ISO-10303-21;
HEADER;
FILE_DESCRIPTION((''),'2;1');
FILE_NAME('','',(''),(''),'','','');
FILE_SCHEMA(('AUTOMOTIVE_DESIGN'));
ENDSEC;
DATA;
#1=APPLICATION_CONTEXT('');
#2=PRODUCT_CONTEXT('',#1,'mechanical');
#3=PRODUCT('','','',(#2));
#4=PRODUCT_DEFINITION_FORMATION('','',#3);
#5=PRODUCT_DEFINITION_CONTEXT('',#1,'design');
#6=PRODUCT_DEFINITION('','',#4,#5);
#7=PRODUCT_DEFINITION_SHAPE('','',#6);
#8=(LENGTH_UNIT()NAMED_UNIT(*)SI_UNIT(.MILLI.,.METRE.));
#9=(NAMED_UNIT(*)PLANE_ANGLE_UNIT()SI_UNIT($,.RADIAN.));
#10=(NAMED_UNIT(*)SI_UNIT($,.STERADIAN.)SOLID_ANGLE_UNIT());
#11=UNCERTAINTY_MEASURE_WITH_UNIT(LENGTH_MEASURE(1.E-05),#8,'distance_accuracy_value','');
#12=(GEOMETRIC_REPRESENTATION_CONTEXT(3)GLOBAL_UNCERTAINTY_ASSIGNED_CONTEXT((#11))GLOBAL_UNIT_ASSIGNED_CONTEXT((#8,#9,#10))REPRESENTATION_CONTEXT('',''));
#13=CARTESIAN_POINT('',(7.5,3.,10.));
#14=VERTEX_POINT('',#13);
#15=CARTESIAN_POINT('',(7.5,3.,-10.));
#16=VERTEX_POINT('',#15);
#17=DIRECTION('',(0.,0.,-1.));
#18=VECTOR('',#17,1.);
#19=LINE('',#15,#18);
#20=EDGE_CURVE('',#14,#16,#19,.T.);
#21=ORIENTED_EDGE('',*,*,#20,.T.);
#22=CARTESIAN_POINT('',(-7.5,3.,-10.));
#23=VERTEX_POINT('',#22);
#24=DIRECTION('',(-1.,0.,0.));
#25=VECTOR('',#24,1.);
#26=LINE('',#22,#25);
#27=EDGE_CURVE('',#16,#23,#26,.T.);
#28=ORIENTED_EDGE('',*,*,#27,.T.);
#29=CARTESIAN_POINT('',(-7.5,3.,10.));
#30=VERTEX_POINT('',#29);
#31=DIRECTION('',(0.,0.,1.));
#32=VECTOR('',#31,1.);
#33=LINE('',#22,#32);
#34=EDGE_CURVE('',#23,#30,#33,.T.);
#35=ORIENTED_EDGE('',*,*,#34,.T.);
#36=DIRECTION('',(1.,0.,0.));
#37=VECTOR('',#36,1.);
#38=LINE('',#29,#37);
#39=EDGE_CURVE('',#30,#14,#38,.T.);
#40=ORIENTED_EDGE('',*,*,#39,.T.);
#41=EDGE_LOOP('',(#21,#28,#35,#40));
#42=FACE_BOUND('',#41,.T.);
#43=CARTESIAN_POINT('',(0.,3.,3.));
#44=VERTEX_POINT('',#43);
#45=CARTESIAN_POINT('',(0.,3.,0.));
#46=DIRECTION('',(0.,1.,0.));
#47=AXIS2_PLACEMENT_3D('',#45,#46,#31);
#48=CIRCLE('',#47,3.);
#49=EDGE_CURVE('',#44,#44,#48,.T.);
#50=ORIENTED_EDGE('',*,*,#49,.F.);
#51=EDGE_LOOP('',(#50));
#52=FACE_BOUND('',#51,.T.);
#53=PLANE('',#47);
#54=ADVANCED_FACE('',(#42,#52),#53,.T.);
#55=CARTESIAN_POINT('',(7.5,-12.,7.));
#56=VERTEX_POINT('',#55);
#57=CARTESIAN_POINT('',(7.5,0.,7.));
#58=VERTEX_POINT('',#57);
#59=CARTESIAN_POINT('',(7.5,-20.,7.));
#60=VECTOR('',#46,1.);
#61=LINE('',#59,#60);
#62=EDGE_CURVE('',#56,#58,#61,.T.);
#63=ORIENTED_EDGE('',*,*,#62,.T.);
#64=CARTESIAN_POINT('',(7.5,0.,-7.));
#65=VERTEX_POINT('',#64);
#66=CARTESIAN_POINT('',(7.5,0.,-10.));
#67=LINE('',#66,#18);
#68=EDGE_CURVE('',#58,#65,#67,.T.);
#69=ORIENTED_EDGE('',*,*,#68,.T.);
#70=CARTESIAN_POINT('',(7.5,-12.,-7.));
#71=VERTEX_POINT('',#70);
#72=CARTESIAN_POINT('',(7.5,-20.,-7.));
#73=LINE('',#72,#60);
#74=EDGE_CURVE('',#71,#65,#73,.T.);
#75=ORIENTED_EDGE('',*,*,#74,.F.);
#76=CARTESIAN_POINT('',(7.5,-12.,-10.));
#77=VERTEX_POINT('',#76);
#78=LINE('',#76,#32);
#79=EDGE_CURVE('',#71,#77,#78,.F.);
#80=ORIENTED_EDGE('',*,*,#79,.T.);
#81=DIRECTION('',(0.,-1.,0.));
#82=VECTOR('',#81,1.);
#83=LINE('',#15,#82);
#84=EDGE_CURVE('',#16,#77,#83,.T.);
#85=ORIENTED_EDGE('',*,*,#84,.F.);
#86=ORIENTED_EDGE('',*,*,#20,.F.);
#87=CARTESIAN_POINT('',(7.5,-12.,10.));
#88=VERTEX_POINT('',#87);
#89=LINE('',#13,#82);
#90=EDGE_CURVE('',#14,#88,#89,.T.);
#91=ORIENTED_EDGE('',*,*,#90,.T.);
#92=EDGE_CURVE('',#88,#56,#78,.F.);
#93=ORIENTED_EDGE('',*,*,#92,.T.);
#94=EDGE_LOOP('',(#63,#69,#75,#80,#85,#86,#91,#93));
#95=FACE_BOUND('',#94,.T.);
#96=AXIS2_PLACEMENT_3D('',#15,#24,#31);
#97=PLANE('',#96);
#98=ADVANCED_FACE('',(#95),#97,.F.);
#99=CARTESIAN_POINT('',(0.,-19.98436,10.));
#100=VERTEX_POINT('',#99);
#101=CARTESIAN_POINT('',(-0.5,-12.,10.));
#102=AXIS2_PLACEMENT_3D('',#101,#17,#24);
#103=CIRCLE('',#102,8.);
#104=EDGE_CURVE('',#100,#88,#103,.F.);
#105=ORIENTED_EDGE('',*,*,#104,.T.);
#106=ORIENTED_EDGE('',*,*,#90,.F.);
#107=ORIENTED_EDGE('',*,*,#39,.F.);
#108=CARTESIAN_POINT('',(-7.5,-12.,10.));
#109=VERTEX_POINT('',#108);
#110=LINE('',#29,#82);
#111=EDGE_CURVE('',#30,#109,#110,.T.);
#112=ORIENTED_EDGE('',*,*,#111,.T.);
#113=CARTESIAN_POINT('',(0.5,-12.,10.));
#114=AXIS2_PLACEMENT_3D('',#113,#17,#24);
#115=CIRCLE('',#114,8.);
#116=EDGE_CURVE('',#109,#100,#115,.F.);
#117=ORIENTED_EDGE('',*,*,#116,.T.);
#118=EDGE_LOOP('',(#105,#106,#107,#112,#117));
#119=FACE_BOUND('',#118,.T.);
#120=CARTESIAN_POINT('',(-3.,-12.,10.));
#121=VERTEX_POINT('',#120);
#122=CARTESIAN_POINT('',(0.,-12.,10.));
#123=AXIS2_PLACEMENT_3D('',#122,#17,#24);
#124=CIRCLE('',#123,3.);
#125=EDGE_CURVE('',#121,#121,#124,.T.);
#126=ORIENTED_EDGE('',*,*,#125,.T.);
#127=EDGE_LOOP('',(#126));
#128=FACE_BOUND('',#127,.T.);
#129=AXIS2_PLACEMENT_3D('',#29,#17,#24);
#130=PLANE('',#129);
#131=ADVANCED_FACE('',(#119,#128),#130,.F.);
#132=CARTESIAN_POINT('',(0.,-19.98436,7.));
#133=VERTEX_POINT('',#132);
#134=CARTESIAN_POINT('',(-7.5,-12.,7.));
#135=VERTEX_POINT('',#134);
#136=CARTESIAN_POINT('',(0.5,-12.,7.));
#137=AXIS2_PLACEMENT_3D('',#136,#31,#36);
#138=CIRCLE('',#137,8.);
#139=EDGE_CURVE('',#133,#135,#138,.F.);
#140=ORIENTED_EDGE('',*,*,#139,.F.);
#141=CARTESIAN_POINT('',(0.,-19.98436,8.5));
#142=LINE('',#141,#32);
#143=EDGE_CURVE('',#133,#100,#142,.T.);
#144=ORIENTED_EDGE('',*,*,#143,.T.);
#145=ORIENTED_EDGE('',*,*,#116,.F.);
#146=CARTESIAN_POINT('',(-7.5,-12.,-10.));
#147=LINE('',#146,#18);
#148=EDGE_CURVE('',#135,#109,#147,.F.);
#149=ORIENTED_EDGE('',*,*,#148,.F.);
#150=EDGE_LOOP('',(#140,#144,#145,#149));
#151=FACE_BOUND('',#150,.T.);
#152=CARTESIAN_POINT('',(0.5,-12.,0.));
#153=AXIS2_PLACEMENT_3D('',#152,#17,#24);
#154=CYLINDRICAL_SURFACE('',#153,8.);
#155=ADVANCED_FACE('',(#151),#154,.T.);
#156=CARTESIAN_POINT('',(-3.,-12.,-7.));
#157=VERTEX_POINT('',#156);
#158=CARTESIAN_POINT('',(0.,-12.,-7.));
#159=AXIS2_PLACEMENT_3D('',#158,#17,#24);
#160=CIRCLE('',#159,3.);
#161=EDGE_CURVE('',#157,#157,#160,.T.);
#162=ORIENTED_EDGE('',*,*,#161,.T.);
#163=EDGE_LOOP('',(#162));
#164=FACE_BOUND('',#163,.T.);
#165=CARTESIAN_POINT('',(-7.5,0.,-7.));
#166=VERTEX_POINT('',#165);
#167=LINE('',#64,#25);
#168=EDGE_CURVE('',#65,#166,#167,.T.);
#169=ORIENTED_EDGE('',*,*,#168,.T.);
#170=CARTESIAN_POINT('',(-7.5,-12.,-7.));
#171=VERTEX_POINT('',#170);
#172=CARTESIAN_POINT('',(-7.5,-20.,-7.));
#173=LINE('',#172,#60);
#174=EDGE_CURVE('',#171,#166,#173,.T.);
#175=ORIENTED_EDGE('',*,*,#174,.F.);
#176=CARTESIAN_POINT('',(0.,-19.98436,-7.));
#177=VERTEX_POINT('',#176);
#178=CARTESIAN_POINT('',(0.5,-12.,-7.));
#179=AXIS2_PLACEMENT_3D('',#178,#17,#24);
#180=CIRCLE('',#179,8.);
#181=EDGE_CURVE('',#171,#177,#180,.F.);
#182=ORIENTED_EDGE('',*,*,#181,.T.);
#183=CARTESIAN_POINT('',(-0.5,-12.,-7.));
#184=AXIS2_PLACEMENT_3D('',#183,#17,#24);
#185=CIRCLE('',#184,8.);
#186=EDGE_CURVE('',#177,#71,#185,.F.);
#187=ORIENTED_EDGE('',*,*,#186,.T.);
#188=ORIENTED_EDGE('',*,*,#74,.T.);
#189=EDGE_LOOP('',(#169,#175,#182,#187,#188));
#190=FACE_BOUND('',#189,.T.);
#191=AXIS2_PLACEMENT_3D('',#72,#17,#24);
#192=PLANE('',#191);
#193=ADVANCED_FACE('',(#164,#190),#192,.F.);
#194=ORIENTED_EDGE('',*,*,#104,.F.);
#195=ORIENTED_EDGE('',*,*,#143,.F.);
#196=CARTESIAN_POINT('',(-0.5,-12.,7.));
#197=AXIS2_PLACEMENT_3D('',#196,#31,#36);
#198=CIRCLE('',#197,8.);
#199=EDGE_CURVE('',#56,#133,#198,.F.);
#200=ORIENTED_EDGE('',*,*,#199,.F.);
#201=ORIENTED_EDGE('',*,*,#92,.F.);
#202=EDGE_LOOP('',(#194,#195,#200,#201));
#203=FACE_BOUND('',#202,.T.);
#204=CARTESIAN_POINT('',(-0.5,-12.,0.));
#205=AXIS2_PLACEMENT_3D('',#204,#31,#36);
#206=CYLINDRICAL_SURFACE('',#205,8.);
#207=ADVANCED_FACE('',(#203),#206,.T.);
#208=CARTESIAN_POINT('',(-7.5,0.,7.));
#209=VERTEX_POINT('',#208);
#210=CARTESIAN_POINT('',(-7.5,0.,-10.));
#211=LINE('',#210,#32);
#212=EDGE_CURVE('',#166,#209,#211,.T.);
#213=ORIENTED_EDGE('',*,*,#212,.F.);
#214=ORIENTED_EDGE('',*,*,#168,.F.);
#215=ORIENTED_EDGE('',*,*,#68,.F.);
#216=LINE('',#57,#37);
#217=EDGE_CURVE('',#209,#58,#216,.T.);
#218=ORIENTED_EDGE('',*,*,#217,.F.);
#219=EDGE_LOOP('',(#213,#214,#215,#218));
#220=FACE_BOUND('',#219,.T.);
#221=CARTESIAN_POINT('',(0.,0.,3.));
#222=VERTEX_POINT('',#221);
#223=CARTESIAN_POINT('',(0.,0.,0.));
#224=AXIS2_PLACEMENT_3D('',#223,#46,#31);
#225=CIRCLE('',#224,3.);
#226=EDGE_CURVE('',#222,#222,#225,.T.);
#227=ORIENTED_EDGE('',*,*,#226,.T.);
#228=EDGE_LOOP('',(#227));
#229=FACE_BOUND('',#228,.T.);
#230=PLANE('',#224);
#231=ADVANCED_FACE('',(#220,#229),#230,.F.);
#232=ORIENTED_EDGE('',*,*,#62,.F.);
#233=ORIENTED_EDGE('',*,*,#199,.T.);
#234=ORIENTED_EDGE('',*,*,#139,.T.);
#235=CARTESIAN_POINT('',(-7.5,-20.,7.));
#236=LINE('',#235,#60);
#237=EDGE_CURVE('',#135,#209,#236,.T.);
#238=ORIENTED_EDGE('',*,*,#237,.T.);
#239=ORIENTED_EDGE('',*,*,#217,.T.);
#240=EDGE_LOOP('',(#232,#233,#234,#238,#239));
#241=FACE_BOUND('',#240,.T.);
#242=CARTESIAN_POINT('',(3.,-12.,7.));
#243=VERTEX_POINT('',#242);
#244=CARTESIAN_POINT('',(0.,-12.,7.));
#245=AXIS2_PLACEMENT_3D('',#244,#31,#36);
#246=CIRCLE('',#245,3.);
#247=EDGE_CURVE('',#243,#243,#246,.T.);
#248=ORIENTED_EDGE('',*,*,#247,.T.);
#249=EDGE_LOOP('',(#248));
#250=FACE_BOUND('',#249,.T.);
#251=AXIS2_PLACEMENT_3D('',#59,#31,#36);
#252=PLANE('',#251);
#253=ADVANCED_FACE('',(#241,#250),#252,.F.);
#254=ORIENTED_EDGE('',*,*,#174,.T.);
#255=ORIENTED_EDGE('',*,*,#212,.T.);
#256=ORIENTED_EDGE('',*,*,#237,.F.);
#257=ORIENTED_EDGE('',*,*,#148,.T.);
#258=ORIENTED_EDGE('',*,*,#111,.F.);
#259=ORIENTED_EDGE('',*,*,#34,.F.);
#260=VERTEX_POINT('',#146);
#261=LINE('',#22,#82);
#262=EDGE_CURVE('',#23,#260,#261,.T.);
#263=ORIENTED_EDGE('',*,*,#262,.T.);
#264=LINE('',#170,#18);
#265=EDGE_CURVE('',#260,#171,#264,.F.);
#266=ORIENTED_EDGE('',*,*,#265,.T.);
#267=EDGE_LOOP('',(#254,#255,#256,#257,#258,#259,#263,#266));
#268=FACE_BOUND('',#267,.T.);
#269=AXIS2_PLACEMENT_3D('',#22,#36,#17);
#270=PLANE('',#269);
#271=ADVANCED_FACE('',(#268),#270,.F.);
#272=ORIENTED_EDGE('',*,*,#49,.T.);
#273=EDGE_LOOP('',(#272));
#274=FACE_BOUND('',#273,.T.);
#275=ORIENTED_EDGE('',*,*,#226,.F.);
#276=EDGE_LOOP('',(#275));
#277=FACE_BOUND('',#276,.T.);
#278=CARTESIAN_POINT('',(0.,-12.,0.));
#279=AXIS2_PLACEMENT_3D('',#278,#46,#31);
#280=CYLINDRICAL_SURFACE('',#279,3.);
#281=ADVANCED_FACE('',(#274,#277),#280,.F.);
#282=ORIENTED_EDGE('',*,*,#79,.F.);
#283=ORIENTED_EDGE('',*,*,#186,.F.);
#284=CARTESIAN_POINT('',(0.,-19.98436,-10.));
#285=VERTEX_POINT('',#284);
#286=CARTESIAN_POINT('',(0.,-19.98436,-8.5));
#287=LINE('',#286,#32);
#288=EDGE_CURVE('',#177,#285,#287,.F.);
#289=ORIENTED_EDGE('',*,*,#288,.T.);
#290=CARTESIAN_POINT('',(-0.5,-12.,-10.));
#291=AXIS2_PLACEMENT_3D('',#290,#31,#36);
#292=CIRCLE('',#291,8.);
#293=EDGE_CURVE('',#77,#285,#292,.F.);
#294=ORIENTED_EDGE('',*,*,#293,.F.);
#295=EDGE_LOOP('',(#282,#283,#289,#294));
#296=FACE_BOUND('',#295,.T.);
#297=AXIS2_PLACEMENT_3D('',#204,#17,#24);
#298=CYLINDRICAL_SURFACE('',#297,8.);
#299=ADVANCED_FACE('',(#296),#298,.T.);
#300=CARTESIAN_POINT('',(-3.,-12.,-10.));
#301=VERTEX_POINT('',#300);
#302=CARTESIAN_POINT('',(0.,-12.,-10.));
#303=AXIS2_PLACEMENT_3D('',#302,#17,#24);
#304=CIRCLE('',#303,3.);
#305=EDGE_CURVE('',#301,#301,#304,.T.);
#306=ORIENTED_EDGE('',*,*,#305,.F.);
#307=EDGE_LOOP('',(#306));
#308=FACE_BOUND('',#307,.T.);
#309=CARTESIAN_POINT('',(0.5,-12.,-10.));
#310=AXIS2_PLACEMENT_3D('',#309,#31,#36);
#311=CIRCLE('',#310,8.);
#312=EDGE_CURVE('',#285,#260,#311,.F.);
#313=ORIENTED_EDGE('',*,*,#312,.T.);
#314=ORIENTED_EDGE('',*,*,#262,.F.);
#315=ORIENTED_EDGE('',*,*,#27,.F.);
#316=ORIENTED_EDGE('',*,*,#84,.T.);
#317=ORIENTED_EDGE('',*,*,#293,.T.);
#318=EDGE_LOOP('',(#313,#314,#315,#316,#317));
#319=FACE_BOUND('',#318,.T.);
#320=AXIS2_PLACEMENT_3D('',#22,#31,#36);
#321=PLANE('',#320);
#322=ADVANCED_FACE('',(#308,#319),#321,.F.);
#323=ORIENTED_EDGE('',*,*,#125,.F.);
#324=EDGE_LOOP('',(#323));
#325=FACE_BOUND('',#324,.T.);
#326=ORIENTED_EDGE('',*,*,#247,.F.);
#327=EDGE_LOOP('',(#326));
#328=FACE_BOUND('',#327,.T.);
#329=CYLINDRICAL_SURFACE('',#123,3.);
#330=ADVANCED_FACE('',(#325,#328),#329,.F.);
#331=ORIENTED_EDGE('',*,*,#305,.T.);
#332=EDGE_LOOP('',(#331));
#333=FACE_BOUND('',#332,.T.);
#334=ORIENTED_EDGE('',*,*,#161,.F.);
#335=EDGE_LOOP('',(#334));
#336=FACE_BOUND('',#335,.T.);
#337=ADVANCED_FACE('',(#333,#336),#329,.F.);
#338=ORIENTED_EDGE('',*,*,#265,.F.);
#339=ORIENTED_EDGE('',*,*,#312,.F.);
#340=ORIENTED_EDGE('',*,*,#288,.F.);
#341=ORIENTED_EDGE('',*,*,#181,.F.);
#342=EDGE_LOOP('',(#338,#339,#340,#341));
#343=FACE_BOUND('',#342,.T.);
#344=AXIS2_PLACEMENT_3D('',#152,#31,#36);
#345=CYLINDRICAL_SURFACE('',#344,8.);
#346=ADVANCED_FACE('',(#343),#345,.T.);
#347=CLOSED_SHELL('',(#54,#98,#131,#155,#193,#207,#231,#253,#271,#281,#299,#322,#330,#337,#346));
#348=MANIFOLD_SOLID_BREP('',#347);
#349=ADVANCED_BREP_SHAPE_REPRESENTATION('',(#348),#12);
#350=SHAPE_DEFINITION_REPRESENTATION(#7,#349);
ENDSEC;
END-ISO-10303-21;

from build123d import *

# Parameters (mm, degrees)
SKETCH1_W           = 15
SKETCH1_H           = 20
BOSS_EXTRUDE1_DEPTH = 3
SKETCH3_W           = 15
SKETCH3_H           = 3
BOSS_EXTRUDE3_DEPTH = 20
SKETCH4_R           = 3
CUT_EXTRUDE1_DEPTH  = 30.261749777
SKETCH2_R           = 3
CUT_EXTRUDE2_DEPTH  = 15
FILLET1_R           = 8


with BuildPart() as part:
    # Sketch1 → Boss-Extrude1 (new body)
    with BuildSketch(Plane(origin=(0, 0, 0), x_dir=(1, 0, 0), z_dir=(0, 1, 0))):
        Rectangle(SKETCH1_W, SKETCH1_H)
    extrude(amount=BOSS_EXTRUDE1_DEPTH)

    # Sketch3 → Boss-Extrude3 (add)
    with BuildSketch(Plane.XZ):
        with Locations((0, -8.5)):
            Rectangle(SKETCH3_W, SKETCH3_H)
        with Locations((0, 8.5)):
            Rectangle(SKETCH3_W, SKETCH3_H)
    extrude(amount=BOSS_EXTRUDE3_DEPTH)

    # Sketch4 → Cut-Extrude1 (cut, through all)
    with BuildSketch(Plane(origin=(0, 0, -10), x_dir=(-1, 0, 0), z_dir=(0, 0, -1))):
        with Locations((0, -12)):
            Circle(SKETCH4_R)
    extrude(amount=-CUT_EXTRUDE1_DEPTH, mode=Mode.SUBTRACT)

    # Sketch2 → Cut-Extrude2 (cut)
    with BuildSketch(Plane(origin=(0, 3, 0), x_dir=(1, 0, 0), z_dir=(0, 1, 0))):
        with Locations(Location((0, 0, 0), (0, 0, 270))):
            Circle(SKETCH2_R)
    extrude(amount=-CUT_EXTRUDE2_DEPTH, mode=Mode.SUBTRACT)

    # Fillet1
    # the kernel refuses this fillet: 8 mm, written as the material it takes off along each edge
    with BuildSketch(Plane(origin=(-7.5, -20, 30), x_dir=(0, 1, 0), z_dir=(0, 0, -1)), Plane(origin=(7.5, -20, -13), x_dir=(0, 1, 0), z_dir=(0, 0, 1))) as fillet1_piece_1:
        with BuildLine():
            CenterArc((FILLET1_R, FILLET1_R), FILLET1_R, 180, 90)
            Line((0, FILLET1_R), (0, 0))
            Line((0, 0), (FILLET1_R, 0))
        make_face()
    extrude(amount=43, mode=Mode.SUBTRACT)
    with BuildSketch(Plane(origin=(7.5, -20, 13), x_dir=(0, 1, 0), z_dir=(0, 0, -1)), Plane(origin=(-7.5, -20, -30), x_dir=(0, 1, 0), z_dir=(0, 0, 1))) as fillet1_piece_2:
        with BuildLine():
            CenterArc((FILLET1_R, -FILLET1_R), FILLET1_R, 90, 90)
            Line((0, -FILLET1_R), (0, 0))
            Line((0, 0), (FILLET1_R, 0))
        make_face()
    extrude(amount=43, mode=Mode.SUBTRACT)


solid = part.part
